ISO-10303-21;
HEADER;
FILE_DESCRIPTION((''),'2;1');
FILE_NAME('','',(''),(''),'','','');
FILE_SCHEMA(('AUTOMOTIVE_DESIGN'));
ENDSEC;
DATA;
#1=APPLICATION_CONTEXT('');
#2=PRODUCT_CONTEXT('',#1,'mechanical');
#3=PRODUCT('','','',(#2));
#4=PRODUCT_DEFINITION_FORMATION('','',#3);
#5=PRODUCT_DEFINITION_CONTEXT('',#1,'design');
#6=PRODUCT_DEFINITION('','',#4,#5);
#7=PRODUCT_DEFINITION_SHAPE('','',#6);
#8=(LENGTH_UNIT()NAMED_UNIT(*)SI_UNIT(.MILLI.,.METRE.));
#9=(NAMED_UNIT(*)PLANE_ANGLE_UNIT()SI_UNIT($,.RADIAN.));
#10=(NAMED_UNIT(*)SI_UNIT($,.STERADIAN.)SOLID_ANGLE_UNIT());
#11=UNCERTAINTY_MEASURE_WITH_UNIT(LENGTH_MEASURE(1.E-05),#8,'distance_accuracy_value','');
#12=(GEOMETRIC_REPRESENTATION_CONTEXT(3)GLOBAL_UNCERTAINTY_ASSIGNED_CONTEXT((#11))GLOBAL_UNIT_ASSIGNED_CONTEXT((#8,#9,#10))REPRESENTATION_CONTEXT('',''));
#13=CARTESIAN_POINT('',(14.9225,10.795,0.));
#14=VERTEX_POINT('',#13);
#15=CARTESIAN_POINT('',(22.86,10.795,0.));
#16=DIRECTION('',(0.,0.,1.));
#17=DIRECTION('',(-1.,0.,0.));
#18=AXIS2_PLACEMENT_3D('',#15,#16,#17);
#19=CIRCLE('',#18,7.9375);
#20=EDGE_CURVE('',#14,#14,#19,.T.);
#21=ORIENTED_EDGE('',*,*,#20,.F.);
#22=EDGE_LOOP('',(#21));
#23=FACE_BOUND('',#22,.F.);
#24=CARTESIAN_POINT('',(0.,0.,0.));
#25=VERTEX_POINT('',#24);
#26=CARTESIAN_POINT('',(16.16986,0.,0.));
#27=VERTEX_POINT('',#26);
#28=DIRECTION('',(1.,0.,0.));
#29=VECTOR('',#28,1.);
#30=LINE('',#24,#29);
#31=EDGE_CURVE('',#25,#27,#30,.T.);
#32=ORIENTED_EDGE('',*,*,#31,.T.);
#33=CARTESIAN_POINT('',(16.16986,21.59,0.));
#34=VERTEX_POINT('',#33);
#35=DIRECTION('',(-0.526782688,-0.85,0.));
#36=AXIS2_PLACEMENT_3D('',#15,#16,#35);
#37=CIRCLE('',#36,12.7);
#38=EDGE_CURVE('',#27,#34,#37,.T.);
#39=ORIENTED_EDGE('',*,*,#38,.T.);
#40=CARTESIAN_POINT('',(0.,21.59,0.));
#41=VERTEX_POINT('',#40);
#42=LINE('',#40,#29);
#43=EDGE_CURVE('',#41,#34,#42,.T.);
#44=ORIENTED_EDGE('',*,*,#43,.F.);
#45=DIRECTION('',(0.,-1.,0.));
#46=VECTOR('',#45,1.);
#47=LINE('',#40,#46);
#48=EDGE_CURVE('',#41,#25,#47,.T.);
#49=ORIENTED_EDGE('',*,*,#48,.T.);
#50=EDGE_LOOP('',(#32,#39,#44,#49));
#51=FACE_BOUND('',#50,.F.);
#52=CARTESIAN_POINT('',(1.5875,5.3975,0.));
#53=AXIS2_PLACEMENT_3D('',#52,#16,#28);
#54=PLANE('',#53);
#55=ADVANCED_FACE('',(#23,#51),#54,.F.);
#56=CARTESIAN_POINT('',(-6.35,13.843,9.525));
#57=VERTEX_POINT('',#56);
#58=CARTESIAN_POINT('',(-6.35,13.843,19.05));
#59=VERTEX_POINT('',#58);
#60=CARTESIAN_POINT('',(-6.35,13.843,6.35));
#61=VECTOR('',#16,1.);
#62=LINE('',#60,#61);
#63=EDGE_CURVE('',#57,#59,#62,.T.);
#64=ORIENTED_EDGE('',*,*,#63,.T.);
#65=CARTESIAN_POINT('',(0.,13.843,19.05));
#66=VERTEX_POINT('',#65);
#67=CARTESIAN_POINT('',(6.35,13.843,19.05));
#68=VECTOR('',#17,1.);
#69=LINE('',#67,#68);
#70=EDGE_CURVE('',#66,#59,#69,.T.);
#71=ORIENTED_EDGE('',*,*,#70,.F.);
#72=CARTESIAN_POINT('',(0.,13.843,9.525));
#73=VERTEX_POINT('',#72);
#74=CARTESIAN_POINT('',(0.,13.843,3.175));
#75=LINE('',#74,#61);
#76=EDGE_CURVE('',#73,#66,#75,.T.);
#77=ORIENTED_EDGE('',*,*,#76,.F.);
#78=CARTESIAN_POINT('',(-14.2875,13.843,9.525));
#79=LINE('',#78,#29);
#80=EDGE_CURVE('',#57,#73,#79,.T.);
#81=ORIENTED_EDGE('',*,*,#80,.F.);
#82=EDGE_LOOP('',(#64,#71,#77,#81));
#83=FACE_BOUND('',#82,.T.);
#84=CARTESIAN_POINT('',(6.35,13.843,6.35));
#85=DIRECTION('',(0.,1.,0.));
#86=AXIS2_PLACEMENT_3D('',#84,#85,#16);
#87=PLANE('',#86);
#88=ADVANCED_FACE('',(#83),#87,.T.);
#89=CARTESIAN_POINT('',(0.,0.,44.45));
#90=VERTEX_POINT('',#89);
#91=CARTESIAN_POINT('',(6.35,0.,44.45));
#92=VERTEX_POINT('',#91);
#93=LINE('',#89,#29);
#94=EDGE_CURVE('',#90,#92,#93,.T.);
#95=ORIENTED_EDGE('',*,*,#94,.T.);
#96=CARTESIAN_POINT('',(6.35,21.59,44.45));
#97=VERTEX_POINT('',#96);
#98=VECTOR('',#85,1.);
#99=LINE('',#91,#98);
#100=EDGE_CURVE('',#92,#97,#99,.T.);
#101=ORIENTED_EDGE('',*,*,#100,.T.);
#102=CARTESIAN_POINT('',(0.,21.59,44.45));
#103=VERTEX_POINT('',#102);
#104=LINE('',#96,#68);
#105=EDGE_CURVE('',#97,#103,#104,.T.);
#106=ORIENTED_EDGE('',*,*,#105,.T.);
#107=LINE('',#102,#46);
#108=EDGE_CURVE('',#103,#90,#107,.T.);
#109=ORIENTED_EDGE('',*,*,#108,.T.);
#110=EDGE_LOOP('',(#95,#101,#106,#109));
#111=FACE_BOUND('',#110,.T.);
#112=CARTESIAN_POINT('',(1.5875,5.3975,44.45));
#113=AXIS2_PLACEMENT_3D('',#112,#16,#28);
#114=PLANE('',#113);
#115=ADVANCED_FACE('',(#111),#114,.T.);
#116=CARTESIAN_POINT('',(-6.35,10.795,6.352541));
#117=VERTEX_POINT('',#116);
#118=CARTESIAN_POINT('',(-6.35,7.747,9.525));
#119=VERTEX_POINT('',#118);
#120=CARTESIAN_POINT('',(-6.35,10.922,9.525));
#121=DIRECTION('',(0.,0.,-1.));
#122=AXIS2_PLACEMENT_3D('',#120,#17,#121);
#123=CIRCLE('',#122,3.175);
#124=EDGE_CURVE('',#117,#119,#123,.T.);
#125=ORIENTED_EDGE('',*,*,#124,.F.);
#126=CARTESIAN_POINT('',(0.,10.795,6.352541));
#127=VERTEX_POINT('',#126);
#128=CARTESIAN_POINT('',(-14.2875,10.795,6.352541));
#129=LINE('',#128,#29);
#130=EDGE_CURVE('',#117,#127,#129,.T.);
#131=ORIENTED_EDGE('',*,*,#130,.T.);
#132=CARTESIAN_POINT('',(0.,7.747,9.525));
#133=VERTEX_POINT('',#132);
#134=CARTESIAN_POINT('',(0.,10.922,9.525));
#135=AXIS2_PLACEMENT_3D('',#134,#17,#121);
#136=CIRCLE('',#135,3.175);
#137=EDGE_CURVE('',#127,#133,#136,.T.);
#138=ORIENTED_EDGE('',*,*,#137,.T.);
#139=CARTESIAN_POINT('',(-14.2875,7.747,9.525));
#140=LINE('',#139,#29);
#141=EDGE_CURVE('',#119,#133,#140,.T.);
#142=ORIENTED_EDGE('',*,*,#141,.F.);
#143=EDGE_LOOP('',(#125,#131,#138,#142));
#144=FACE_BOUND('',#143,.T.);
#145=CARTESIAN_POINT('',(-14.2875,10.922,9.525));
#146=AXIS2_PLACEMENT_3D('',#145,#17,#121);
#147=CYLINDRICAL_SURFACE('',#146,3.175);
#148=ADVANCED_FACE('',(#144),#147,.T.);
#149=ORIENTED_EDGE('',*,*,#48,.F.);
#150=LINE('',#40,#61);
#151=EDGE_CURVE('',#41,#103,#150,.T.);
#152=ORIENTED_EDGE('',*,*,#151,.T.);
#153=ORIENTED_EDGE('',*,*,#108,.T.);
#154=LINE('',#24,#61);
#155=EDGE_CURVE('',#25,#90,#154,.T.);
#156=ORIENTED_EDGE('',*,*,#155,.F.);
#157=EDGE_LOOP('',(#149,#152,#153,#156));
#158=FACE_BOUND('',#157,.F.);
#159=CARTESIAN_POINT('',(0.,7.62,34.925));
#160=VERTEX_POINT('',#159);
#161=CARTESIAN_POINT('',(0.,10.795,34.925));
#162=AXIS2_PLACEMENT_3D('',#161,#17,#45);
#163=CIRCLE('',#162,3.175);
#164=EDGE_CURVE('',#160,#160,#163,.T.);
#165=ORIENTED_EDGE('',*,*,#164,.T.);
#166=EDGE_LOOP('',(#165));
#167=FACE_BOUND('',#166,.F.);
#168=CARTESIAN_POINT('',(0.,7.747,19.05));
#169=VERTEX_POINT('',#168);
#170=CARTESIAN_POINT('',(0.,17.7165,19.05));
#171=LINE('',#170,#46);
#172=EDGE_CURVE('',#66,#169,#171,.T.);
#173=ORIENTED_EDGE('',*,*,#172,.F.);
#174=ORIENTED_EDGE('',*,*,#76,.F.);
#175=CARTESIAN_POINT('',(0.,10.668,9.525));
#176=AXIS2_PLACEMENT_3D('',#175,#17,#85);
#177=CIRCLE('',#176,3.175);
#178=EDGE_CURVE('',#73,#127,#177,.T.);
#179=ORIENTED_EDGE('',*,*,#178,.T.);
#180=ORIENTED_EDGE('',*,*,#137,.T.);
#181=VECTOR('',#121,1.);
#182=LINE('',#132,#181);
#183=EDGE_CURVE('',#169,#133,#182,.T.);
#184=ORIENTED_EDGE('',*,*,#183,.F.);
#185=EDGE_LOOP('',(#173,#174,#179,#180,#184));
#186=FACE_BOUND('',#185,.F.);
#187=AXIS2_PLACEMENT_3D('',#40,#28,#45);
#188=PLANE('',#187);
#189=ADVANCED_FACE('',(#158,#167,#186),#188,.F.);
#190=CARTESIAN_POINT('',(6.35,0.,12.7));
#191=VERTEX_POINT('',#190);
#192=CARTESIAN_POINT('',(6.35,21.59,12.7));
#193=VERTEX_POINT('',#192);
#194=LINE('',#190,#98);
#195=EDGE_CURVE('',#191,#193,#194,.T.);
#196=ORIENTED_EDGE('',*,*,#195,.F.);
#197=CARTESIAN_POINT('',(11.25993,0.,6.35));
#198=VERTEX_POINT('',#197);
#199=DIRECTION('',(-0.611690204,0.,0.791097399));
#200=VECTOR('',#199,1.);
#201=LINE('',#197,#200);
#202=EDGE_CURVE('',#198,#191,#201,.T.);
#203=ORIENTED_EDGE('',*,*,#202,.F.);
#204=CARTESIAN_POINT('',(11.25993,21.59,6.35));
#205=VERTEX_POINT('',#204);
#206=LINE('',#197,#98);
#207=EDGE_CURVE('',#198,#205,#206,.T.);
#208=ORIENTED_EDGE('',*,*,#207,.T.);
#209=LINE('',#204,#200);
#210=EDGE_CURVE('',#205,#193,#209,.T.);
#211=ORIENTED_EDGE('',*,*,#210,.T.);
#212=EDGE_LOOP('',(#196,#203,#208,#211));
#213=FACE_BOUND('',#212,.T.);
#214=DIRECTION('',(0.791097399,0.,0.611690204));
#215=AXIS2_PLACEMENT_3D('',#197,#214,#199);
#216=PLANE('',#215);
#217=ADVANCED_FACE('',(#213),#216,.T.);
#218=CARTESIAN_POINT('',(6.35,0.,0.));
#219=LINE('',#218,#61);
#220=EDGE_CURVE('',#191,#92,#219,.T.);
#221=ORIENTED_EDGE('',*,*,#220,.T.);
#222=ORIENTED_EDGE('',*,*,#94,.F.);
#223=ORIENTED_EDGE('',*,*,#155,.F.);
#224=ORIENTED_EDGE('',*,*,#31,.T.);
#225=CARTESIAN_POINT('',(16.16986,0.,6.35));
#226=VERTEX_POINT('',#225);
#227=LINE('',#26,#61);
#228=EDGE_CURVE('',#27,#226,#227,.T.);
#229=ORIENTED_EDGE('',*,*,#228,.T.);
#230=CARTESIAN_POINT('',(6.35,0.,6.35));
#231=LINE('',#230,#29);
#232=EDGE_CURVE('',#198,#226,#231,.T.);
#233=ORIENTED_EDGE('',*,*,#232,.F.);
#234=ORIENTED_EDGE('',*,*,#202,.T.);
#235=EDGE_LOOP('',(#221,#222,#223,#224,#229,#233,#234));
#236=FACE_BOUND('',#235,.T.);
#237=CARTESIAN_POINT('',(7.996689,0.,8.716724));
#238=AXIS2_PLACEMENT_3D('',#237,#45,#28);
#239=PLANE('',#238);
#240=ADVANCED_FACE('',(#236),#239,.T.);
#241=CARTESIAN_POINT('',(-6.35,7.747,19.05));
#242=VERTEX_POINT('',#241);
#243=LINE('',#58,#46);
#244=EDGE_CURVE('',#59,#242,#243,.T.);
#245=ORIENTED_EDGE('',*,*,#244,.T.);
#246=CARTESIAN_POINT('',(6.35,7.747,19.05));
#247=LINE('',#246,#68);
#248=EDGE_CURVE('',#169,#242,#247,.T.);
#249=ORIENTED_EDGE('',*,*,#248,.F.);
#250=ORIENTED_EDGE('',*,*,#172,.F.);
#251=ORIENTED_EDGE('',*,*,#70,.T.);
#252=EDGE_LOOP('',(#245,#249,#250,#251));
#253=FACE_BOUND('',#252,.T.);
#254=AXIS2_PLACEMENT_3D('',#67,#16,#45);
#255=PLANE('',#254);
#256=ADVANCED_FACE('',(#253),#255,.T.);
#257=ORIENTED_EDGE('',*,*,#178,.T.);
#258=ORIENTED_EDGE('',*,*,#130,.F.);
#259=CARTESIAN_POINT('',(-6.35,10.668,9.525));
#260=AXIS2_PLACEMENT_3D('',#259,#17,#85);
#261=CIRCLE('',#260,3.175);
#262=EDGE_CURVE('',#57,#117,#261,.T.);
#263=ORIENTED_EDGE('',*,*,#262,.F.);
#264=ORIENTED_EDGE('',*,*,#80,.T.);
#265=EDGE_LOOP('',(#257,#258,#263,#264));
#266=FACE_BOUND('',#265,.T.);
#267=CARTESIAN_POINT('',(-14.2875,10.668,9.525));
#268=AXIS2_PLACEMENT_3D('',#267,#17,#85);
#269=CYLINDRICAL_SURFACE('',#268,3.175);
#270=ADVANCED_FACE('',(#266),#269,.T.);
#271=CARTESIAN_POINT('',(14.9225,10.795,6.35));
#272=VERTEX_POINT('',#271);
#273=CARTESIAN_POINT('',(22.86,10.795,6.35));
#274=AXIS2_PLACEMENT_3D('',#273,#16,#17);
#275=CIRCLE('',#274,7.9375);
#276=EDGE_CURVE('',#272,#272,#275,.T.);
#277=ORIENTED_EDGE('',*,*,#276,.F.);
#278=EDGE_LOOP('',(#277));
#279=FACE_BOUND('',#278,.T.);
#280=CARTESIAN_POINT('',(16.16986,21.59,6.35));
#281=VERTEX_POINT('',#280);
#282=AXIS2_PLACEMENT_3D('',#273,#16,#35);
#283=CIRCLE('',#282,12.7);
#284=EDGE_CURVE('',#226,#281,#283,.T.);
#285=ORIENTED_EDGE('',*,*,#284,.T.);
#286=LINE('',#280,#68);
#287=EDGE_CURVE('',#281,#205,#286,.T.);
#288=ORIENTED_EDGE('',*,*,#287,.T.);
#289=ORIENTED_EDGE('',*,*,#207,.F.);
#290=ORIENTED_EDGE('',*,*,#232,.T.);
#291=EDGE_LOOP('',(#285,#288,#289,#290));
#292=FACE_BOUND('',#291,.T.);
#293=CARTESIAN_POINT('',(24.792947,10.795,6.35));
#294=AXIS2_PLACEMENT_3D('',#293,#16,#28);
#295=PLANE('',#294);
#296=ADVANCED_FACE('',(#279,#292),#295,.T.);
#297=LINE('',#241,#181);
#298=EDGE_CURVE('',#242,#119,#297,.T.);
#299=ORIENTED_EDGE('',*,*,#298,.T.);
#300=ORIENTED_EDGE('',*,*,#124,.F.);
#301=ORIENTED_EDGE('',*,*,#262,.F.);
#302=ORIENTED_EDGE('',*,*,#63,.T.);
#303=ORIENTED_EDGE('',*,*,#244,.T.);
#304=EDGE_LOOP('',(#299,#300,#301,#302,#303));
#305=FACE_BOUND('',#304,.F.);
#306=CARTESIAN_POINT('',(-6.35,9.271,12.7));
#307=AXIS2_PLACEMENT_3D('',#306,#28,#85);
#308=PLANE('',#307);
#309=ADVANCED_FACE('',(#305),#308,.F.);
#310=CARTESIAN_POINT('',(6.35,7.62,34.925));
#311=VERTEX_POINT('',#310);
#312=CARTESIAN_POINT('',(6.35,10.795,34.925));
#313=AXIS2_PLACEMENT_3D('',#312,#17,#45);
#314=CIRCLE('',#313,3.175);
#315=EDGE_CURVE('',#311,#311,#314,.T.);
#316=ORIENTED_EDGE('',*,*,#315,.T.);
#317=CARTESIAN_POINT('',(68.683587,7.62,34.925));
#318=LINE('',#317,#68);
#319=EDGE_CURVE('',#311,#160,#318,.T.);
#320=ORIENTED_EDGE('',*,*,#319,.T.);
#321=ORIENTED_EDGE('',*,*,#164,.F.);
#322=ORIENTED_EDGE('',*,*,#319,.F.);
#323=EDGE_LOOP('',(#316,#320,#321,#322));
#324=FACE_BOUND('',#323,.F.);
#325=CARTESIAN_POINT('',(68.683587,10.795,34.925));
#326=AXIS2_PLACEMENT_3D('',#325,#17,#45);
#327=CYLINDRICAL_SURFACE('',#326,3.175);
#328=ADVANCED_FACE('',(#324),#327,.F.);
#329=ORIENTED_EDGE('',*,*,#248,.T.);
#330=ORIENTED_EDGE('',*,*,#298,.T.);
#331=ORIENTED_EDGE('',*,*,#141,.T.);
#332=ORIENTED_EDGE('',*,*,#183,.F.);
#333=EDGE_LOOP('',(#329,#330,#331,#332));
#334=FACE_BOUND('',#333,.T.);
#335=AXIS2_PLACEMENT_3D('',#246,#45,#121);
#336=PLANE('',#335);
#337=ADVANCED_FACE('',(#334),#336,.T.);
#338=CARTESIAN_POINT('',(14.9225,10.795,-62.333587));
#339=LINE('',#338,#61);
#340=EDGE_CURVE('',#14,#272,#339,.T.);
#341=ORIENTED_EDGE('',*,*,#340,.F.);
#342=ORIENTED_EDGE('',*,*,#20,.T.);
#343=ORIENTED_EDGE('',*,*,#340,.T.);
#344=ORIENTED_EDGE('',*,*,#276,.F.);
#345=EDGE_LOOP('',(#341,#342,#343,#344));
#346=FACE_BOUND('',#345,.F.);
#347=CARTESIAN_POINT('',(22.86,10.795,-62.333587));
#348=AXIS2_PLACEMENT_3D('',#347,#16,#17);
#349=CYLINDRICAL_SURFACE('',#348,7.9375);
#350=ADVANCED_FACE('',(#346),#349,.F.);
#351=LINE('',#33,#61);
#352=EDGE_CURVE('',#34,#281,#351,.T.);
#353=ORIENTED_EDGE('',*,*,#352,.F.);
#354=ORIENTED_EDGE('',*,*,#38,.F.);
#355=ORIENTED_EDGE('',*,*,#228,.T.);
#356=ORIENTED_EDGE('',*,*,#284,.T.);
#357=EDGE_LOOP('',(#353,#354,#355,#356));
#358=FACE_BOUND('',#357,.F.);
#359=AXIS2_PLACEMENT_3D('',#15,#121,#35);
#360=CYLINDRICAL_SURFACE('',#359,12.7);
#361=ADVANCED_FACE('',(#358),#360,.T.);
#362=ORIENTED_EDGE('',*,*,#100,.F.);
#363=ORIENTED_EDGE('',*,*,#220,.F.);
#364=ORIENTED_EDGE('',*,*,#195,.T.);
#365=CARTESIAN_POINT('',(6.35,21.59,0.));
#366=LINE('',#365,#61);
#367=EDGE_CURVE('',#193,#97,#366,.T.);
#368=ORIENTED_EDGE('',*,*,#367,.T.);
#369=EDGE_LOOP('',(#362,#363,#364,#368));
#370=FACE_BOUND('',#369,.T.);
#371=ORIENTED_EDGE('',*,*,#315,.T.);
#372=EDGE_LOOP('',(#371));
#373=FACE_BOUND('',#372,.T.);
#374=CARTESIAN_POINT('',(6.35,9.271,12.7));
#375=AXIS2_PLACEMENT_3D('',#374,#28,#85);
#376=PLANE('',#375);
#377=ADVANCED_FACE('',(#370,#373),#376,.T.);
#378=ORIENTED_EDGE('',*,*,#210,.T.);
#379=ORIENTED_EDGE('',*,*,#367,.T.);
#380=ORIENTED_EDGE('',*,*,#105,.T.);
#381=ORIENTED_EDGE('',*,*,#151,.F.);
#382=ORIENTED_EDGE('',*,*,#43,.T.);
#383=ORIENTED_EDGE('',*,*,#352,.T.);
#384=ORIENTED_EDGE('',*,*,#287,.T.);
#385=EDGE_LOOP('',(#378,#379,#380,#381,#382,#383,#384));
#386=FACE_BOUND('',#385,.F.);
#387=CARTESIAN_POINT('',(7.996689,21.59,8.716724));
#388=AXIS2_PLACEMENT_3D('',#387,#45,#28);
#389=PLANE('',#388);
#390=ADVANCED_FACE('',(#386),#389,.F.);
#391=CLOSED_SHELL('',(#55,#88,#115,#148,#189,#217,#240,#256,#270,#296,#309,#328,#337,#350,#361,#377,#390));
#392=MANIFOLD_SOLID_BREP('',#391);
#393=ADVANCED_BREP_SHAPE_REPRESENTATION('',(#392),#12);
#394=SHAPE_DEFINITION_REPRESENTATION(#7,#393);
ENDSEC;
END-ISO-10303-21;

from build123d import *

# Parameters (mm, degrees)
F1_DEPTH    = 6.35
F0_W        = 3.175
F0_H        = 10.795
F2_DEPTH    = 44.45
F3_D        = 15.875
F5_D        = 6.35
F6_DEPTH    = 12.7
F7_T1_DEPTH = 14.2875
F9_DEPTH    = 21.59


# Not quite as in the source:
# - a fillet or chamfer that OpenCascade refuses, or shapes differently, is made with other operations: its cross-section is extruded or revolved along the edge and cut away or added


with BuildPart() as f1:
    # F0 (on Top) → F1 (new body)
    with BuildSketch(Plane.XY):
        with BuildLine():
            Line((22.86, 0), (16.1698598669, 0))
            ThreePointArc((16.1698598669, 0), (29.0375893482, -0.3012781979), (35.56, 10.795))
            ThreePointArc((35.56, 10.795), (29.0375893482, 21.8912781979), (16.1698598669, 21.59))
            Line((16.1698598669, 21.59), (22.86, 21.59))
            Line((22.86, 21.59), (22.86, 0))
        make_face()
        with BuildLine():
            ThreePointArc((16.1698598669, 21.59), (10.16, 10.795), (16.1698598669, 0))
            Line((16.1698598669, 0), (22.86, 0))
            Line((22.86, 0), (22.86, 21.59))
            Line((22.86, 21.59), (16.1698598669, 21.59))
        make_face()
        with BuildLine():
            Line((6.35, 10.795), (6.35, 0))
            Line((6.35, 0), (16.1698598669, 0))
            ThreePointArc((16.1698598669, 0), (10.16, 10.795), (16.1698598669, 21.59))
            Line((16.1698598669, 21.59), (6.35, 21.59))
            Line((6.35, 21.59), (6.35, 10.795))
        make_face()
    extrude(amount=F1_DEPTH)

    # F0 (on Top) → F2 (join)
    with BuildSketch(Plane.XY):
        with Locations((1.5875, 5.3975)):
            Rectangle(F0_W, F0_H)
        with Locations((4.7625, 5.3975)):
            Rectangle(F0_W, F0_H)
        with Locations((4.7625, 16.1925)):
            Rectangle(F0_W, F0_H)
        with Locations((1.5875, 16.1925)):
            Rectangle(F0_W, F0_H)
    extrude(amount=F2_DEPTH)

    # F3 (through all)
    with Locations(Plane(origin=(0, 0, 0), x_dir=(1, 0, 0), z_dir=(0, 0, -1))):
        with Locations((22.86, -10.795)):
            Hole(F3_D / 2)

    # F5 (through all)
    with Locations(Plane.YZ.offset(6.35)):
        with Locations((10.795, 34.925)):
            Hole(F5_D / 2)

    # F4 (on face) → F6 (join)
    with BuildSketch(Plane.YZ.offset(6.35)):
        Polygon((10.795, 12.7), (10.795, 19.05), (7.747, 19.05), (7.747, 6.35), (10.795, 6.35), align=None)
        Polygon((13.843, 19.05), (10.795, 19.05), (10.795, 12.7), (10.795, 6.35), (13.843, 6.35), align=None)
    extrude(amount=-F6_DEPTH)

    # F7: fillet of radius 3.175 on 2 edges, made by hand

    # F7_s2 → F7_t1 (cut)
    with BuildSketch(Plane.YZ.offset(-14.2875)):
        with BuildLine():
            ThreePointArc((10.922, 6.35), (8.6769359697, 7.2799359697), (7.747, 9.525))
            Line((7.747, 9.525), (7.747, 6.35))
            Line((7.747, 6.35), (10.922, 6.35))
        make_face()
        with BuildLine():
            ThreePointArc((13.843, 9.525), (12.9130640303, 7.2799359697), (10.668, 6.35))
            Line((10.668, 6.35), (13.843, 6.35))
            Line((13.843, 6.35), (13.843, 9.525))
        make_face()
    extrude(amount=F7_T1_DEPTH, mode=Mode.SUBTRACT)

    # F8 (on face) → F9 (join)
    with BuildSketch(Plane.XZ):
        Polygon((11.2599299335, 6.35), (6.35, 12.7), (6.35, 6.35), align=None)
    extrude(amount=-F9_DEPTH)


solid = f1.part
